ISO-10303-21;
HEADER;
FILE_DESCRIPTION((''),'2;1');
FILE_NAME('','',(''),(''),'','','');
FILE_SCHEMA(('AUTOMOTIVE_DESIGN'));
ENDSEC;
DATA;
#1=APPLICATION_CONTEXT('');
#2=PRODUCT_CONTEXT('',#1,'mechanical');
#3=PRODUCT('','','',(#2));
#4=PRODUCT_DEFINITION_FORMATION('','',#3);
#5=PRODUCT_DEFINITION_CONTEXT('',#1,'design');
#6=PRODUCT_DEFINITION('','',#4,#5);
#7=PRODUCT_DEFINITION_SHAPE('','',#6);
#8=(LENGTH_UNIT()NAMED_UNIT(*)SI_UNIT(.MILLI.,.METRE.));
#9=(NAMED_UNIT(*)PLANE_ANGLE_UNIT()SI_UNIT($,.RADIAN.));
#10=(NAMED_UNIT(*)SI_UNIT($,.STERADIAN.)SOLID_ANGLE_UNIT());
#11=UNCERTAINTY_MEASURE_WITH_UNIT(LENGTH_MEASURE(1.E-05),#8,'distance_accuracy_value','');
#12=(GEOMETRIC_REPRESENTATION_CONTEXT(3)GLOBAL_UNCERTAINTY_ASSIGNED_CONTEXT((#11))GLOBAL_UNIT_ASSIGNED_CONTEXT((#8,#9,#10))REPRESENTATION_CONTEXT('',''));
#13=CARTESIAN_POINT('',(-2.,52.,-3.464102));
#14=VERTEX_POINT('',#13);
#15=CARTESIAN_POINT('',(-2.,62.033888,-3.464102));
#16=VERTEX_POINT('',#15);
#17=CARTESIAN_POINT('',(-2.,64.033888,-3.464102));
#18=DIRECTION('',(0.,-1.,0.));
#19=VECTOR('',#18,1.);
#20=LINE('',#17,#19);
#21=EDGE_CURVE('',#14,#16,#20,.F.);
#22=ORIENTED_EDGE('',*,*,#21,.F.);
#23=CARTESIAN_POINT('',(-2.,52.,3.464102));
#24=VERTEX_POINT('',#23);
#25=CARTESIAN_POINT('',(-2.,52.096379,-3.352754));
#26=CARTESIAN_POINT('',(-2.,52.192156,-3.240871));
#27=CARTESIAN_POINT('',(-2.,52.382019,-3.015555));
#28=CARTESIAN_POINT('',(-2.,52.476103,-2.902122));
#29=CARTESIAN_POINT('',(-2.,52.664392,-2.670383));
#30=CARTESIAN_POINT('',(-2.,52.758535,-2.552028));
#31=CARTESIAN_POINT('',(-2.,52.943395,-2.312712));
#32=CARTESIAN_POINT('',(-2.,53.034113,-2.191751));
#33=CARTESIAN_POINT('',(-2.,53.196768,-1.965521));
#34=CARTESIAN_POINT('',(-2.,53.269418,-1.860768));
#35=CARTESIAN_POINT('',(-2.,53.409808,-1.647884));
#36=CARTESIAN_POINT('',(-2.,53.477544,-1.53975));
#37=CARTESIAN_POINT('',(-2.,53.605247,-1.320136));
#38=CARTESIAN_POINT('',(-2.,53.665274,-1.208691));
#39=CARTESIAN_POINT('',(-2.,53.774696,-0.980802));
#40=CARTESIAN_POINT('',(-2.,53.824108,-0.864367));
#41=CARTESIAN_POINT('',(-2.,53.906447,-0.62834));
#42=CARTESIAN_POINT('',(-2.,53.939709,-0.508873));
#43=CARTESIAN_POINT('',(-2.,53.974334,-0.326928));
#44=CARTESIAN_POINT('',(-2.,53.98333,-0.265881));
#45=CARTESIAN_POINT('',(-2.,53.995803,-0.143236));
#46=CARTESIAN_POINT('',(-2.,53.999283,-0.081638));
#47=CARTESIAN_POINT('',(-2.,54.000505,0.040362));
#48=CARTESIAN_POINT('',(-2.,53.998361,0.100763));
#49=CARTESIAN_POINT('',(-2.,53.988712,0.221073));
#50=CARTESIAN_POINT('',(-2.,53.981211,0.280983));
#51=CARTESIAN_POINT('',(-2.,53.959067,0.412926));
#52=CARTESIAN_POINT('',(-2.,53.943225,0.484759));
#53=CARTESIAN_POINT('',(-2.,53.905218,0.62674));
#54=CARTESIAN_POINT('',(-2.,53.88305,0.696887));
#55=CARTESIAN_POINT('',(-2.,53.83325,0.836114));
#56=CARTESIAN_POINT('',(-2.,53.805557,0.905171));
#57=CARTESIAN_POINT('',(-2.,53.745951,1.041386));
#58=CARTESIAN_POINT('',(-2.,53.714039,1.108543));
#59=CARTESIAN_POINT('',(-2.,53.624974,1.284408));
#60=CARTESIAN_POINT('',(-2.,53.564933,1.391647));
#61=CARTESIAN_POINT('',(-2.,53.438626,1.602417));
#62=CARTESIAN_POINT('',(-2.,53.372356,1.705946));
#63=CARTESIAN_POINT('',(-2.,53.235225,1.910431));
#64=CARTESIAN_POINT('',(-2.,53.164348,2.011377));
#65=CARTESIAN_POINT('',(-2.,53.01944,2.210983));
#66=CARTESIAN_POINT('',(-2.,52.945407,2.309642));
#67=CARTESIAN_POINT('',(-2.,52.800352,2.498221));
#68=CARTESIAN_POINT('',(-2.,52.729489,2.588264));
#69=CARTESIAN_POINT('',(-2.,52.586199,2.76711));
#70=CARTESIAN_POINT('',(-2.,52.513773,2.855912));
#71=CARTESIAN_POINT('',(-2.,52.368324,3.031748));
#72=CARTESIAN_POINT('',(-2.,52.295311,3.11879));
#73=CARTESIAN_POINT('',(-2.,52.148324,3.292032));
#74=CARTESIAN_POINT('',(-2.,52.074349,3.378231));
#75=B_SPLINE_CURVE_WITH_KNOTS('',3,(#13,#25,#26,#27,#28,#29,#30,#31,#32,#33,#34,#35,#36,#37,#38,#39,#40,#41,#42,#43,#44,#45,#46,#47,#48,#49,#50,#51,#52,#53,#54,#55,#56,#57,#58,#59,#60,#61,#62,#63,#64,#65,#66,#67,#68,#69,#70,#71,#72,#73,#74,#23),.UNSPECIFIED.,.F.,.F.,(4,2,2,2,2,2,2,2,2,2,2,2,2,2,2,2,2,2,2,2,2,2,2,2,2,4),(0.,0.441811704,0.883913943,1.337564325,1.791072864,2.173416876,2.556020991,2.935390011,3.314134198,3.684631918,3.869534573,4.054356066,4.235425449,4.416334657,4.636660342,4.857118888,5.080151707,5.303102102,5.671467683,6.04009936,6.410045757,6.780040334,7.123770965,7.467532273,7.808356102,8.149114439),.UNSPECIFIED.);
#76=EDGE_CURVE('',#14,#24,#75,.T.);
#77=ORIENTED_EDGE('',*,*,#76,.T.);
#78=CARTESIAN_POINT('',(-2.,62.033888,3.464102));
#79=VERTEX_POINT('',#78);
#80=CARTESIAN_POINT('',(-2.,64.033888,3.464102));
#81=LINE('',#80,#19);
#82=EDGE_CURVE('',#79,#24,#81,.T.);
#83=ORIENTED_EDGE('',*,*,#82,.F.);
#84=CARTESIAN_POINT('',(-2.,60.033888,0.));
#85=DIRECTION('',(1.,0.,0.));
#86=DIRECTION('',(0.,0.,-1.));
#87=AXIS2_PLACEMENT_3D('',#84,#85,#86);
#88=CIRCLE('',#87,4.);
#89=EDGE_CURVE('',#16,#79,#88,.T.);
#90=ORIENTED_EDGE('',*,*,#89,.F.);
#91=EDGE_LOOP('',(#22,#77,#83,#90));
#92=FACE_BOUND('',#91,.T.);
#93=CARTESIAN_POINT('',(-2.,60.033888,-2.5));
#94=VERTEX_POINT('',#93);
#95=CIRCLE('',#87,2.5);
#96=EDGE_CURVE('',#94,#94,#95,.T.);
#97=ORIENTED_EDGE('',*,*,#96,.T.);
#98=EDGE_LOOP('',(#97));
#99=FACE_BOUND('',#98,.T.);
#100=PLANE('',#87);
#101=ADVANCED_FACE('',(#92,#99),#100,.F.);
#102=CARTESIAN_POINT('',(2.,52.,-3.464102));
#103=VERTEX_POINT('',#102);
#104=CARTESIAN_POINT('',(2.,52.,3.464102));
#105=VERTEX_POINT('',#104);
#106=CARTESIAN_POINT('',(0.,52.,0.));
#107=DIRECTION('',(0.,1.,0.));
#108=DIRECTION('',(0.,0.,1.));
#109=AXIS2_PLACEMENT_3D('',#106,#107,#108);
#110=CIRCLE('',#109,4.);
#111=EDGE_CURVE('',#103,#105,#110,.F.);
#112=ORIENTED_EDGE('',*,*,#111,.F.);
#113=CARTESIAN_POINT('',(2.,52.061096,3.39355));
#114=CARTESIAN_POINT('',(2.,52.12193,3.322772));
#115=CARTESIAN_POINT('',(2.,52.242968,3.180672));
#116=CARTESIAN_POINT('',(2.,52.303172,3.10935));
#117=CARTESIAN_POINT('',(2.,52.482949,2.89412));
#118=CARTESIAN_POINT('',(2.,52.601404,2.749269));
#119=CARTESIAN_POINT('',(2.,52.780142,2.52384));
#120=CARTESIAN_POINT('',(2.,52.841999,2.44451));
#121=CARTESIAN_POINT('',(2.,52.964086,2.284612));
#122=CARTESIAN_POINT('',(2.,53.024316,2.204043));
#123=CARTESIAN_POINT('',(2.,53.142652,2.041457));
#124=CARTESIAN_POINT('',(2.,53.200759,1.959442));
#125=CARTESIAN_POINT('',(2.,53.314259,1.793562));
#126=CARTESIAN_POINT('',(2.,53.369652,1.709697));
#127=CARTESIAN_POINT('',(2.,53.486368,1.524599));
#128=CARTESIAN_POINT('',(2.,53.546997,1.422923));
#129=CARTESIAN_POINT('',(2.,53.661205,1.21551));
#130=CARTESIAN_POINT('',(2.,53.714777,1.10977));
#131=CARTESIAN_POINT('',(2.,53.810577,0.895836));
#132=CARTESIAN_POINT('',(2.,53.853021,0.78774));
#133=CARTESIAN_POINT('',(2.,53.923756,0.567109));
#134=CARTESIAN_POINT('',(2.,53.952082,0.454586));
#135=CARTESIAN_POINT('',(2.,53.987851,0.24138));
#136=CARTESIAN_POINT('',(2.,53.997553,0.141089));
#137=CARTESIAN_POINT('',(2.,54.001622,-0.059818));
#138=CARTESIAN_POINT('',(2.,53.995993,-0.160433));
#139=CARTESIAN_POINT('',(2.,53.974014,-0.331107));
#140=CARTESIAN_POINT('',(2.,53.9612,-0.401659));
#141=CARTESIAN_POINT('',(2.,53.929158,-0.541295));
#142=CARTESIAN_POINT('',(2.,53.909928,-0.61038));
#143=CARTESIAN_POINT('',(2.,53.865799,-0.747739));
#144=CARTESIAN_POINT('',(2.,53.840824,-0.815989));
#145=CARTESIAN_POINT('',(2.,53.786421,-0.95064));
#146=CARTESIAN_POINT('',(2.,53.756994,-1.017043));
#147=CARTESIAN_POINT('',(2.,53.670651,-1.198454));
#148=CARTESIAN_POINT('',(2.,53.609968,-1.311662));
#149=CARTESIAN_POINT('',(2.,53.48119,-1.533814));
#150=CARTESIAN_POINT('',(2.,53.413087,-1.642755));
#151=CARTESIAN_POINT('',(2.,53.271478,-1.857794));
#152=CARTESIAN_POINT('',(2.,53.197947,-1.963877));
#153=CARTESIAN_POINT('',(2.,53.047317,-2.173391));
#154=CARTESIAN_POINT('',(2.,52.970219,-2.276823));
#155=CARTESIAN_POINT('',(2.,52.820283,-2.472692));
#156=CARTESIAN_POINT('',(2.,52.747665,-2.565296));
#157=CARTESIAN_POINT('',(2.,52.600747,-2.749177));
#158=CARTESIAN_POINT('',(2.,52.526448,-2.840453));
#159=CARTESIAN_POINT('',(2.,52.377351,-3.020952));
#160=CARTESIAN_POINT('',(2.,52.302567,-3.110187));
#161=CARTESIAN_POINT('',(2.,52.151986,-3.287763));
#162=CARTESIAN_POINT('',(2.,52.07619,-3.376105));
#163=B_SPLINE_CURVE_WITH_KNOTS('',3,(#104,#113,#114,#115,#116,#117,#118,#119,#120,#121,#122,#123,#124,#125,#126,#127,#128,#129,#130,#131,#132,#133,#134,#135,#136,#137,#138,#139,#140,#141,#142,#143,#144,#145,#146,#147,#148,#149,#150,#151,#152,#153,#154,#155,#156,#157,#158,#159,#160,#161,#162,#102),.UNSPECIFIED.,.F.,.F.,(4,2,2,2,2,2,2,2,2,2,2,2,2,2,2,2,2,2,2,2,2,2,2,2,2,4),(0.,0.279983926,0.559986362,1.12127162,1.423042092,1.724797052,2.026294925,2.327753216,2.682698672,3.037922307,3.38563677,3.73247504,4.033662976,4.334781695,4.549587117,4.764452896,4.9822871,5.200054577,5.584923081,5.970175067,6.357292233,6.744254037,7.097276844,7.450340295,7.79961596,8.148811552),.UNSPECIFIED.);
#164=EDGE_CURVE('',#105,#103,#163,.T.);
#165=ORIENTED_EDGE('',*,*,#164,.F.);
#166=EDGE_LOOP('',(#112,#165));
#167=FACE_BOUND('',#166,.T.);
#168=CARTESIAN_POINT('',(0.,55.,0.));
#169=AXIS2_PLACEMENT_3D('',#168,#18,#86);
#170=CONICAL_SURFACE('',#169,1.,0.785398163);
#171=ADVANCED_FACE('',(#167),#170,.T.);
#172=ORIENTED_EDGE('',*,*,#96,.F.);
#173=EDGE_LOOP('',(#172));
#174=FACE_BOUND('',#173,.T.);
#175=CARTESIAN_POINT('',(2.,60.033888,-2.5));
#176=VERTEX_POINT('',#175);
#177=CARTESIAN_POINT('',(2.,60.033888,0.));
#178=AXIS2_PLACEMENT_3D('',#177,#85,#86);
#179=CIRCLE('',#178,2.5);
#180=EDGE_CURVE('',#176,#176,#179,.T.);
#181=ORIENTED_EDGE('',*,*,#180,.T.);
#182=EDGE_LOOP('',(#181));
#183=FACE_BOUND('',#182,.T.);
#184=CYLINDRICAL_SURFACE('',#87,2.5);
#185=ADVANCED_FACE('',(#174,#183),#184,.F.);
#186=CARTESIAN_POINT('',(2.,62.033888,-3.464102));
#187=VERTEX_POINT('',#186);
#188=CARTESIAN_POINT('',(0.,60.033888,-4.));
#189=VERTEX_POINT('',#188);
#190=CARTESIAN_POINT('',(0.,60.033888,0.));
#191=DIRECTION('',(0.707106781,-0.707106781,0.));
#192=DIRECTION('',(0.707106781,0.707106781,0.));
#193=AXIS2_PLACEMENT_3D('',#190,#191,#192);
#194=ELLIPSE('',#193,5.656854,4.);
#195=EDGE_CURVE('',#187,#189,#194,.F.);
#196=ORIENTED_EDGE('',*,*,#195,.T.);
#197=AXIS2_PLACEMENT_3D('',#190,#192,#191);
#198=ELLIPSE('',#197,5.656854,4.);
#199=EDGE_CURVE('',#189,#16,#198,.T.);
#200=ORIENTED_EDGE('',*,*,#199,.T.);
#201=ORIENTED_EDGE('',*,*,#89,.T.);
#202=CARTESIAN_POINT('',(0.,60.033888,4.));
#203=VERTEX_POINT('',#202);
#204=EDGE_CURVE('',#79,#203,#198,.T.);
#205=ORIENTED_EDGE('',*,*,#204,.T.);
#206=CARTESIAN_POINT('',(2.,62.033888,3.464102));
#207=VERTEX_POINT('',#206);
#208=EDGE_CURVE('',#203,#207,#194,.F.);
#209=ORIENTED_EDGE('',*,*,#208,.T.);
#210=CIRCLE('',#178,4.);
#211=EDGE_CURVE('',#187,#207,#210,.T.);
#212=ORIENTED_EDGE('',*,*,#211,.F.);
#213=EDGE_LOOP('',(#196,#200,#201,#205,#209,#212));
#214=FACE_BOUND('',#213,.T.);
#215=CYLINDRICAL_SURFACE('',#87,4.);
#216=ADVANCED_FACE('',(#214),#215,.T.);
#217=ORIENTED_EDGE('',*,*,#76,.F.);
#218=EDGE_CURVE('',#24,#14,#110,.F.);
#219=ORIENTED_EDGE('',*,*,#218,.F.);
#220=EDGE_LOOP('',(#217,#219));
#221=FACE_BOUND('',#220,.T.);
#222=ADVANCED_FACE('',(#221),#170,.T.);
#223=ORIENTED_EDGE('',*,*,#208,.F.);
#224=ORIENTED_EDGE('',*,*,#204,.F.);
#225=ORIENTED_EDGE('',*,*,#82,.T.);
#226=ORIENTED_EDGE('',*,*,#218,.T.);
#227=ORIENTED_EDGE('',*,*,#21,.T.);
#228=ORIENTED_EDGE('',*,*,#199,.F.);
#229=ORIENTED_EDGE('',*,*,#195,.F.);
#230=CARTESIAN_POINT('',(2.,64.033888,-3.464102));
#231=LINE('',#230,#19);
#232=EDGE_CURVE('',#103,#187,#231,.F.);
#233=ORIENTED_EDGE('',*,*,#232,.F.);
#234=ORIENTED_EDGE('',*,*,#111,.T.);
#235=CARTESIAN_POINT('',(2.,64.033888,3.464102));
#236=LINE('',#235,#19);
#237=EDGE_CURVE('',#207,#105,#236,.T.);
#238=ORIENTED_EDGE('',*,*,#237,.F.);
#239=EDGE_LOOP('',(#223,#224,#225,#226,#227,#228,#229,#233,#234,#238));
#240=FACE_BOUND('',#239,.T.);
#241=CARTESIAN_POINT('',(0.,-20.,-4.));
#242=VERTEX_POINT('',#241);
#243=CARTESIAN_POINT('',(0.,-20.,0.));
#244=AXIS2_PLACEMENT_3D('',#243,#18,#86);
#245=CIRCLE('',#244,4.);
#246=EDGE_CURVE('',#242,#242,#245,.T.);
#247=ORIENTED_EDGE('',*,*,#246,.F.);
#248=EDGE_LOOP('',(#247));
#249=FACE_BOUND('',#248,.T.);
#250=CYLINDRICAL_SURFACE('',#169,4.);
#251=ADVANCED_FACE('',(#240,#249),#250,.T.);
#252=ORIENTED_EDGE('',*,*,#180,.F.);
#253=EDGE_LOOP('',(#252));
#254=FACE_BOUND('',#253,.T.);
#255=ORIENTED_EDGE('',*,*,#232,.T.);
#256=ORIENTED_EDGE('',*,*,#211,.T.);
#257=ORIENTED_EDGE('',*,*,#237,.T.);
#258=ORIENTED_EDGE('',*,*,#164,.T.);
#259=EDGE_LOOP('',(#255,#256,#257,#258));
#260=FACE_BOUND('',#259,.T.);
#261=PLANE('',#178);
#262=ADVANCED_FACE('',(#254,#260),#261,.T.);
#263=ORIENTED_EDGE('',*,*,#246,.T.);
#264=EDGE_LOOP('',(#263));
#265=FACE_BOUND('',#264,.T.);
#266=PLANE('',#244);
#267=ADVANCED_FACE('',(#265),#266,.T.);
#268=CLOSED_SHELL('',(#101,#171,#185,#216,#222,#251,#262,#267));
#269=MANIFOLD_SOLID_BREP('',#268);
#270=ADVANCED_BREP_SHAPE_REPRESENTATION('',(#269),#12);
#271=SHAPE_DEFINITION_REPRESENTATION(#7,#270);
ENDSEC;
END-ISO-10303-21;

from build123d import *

# Parameters (mm, degrees)
SKETCH1_R                = 4
BOSS_EXTRUDE1_DEPTH      = 55
BOSS_EXTRUDE2_DEPTH      = 2
BOSS_EXTRUDE2_DEPTH_BACK = 2
SKETCH2_R                = 2.5
SKETCH3_R                = 5.5
BOSS_EXTRUDE3_DEPTH      = 3
CHAMFER1_SIZE            = 2
BOSS_EXTRUDE4_START      = 20
SKETCH4_R                = 4
BOSS_EXTRUDE4_DEPTH      = 20
SKETCH5_OUTSIDE_W        = 30.092
SKETCH5_OUTSIDE_H        = 30.092
SKETCH5_OUTSIDE_R        = 4
CUT_EXTRUDE1_DEPTH       = 85.393094269
CHAMFER2_SIZE            = 3
CHAMFER3_SIZE            = 3


with BuildPart() as part:
    # Sketch1 → Boss-Extrude1 (new body)
    with BuildSketch(Plane(origin=(0, 0, 0), x_dir=(1, 0, 0), z_dir=(0, 1, 0))):
        with Locations(Location((0, 0, 0), (0, 0, 270))):
            Circle(SKETCH1_R)
    extrude(amount=BOSS_EXTRUDE1_DEPTH)

    # Sketch2 → Boss-Extrude2 (add, two sides: drawn at the far end of the back side and taken through both)
    with BuildSketch(Plane(origin=(0, 0, 0), x_dir=(0, 0, -1), z_dir=(1, 0, 0)).offset(-BOSS_EXTRUDE2_DEPTH_BACK)):
        with BuildLine():
            Line((-4, 60.033888167), (-4, 55))
            Line((-4, 55), (4, 55))
            Line((4, 55), (4, 60.033888167))
            ThreePointArc((4, 60.033888167), (0, 64.033888167), (-4, 60.033888167))
        make_face()
        with Locations((0, 60.033888167)):
            Circle(SKETCH2_R, mode=Mode.SUBTRACT)
    extrude(amount=BOSS_EXTRUDE2_DEPTH + BOSS_EXTRUDE2_DEPTH_BACK)

    # Sketch3 → Boss-Extrude3 (add)
    with BuildSketch(Plane.XZ.offset(-55)):
        with Locations(Location((0, 0, 0), (0, 0, 270))):
            Circle(SKETCH3_R)
    extrude(amount=BOSS_EXTRUDE3_DEPTH)

    # Chamfer1
    # the kernel refuses this chamfer: 2 mm, written as the material it takes off along each edge
    with BuildSketch(Plane(origin=(0, 52, 0), x_dir=(0, 0, -1), z_dir=(-1, 0, 0))) as chamfer1_piece_1_section:
        Polygon((5.5 - CHAMFER1_SIZE, 0), (5.5, -CHAMFER1_SIZE), (5.5, 0), align=None)
    chamfer1_piece_1 = revolve(axis=Axis((0, 52, 0), (0, -1, 0)), mode=Mode.PRIVATE)
    chamfer1_piece_1 = chamfer1_piece_1 - Plane(origin=(0, 53.250152147, 0), x_dir=(0, 0, 1), z_dir=(0, -1, 0)) * Cylinder(4, 22, mode=Mode.PRIVATE)
    add(chamfer1_piece_1, mode=Mode.SUBTRACT)

    # Sketch4 → Boss-Extrude4 (add)
    with BuildSketch(Plane.XZ.offset(BOSS_EXTRUDE4_START)):
        with Locations(Location((0, 0, 0), (0, 0, 270))):
            Circle(SKETCH4_R)
    extrude(amount=-BOSS_EXTRUDE4_DEPTH)

    # Sketch5 outside → Cut-Extrude1 (cut, through all)
    with BuildSketch(Plane.XZ.offset(20)):
        Rectangle(SKETCH5_OUTSIDE_W, SKETCH5_OUTSIDE_H)
        with Locations(Location((0, 0, 0), (0, 0, 270))):
            Circle(SKETCH5_OUTSIDE_R, mode=Mode.SUBTRACT)
    extrude(amount=-CUT_EXTRUDE1_DEPTH, mode=Mode.SUBTRACT)

    # Chamfer2
    # the kernel refuses this chamfer: 3 mm, written as the material it takes off along each edge
    with BuildSketch(Plane(origin=(0, 55, 0), x_dir=(-0.9865404268898706, 0, -0.16351754068586014), z_dir=(-0.16351754068586014, 0, 0.9865404268898706))) as chamfer2_piece_1_section:
        Polygon((4, CHAMFER2_SIZE), (4 - CHAMFER2_SIZE, 0), (4, 0), align=None)
    chamfer2_piece_1 = revolve(axis=Axis((0, 55, 0), (0, -1, 0)), revolution_arc=341.177747572, mode=Mode.PRIVATE)
    chamfer2_piece_1 = split(chamfer2_piece_1, bisect_by=Plane(origin=(2, 53.817100825, 1e-09), z_dir=(1, 0, 0)), keep=Keep.TOP, mode=Mode.PRIVATE)
    add(chamfer2_piece_1, mode=Mode.SUBTRACT)

    # Chamfer3
    # the kernel refuses this chamfer: 3 mm, written as the material it takes off along each edge
    with BuildSketch(Plane(origin=(0, 55, 0), x_dir=(0.9865404268898706, 0, 0.16351754068586002), z_dir=(0.16351754068586002, 0, -0.9865404268898706))) as chamfer3_piece_1_section:
        Polygon((4, CHAMFER3_SIZE), (4 - CHAMFER3_SIZE, 0), (4, 0), align=None)
    chamfer3_piece_1 = revolve(axis=Axis((0, 55, 0), (0, -1, 0)), revolution_arc=341.177747572, mode=Mode.PRIVATE)
    chamfer3_piece_1 = split(chamfer3_piece_1, bisect_by=Plane(origin=(-2, 53.794161032, -4e-09), z_dir=(-1, 0, 0)), keep=Keep.TOP, mode=Mode.PRIVATE)
    add(chamfer3_piece_1, mode=Mode.SUBTRACT)


solid = part.part
